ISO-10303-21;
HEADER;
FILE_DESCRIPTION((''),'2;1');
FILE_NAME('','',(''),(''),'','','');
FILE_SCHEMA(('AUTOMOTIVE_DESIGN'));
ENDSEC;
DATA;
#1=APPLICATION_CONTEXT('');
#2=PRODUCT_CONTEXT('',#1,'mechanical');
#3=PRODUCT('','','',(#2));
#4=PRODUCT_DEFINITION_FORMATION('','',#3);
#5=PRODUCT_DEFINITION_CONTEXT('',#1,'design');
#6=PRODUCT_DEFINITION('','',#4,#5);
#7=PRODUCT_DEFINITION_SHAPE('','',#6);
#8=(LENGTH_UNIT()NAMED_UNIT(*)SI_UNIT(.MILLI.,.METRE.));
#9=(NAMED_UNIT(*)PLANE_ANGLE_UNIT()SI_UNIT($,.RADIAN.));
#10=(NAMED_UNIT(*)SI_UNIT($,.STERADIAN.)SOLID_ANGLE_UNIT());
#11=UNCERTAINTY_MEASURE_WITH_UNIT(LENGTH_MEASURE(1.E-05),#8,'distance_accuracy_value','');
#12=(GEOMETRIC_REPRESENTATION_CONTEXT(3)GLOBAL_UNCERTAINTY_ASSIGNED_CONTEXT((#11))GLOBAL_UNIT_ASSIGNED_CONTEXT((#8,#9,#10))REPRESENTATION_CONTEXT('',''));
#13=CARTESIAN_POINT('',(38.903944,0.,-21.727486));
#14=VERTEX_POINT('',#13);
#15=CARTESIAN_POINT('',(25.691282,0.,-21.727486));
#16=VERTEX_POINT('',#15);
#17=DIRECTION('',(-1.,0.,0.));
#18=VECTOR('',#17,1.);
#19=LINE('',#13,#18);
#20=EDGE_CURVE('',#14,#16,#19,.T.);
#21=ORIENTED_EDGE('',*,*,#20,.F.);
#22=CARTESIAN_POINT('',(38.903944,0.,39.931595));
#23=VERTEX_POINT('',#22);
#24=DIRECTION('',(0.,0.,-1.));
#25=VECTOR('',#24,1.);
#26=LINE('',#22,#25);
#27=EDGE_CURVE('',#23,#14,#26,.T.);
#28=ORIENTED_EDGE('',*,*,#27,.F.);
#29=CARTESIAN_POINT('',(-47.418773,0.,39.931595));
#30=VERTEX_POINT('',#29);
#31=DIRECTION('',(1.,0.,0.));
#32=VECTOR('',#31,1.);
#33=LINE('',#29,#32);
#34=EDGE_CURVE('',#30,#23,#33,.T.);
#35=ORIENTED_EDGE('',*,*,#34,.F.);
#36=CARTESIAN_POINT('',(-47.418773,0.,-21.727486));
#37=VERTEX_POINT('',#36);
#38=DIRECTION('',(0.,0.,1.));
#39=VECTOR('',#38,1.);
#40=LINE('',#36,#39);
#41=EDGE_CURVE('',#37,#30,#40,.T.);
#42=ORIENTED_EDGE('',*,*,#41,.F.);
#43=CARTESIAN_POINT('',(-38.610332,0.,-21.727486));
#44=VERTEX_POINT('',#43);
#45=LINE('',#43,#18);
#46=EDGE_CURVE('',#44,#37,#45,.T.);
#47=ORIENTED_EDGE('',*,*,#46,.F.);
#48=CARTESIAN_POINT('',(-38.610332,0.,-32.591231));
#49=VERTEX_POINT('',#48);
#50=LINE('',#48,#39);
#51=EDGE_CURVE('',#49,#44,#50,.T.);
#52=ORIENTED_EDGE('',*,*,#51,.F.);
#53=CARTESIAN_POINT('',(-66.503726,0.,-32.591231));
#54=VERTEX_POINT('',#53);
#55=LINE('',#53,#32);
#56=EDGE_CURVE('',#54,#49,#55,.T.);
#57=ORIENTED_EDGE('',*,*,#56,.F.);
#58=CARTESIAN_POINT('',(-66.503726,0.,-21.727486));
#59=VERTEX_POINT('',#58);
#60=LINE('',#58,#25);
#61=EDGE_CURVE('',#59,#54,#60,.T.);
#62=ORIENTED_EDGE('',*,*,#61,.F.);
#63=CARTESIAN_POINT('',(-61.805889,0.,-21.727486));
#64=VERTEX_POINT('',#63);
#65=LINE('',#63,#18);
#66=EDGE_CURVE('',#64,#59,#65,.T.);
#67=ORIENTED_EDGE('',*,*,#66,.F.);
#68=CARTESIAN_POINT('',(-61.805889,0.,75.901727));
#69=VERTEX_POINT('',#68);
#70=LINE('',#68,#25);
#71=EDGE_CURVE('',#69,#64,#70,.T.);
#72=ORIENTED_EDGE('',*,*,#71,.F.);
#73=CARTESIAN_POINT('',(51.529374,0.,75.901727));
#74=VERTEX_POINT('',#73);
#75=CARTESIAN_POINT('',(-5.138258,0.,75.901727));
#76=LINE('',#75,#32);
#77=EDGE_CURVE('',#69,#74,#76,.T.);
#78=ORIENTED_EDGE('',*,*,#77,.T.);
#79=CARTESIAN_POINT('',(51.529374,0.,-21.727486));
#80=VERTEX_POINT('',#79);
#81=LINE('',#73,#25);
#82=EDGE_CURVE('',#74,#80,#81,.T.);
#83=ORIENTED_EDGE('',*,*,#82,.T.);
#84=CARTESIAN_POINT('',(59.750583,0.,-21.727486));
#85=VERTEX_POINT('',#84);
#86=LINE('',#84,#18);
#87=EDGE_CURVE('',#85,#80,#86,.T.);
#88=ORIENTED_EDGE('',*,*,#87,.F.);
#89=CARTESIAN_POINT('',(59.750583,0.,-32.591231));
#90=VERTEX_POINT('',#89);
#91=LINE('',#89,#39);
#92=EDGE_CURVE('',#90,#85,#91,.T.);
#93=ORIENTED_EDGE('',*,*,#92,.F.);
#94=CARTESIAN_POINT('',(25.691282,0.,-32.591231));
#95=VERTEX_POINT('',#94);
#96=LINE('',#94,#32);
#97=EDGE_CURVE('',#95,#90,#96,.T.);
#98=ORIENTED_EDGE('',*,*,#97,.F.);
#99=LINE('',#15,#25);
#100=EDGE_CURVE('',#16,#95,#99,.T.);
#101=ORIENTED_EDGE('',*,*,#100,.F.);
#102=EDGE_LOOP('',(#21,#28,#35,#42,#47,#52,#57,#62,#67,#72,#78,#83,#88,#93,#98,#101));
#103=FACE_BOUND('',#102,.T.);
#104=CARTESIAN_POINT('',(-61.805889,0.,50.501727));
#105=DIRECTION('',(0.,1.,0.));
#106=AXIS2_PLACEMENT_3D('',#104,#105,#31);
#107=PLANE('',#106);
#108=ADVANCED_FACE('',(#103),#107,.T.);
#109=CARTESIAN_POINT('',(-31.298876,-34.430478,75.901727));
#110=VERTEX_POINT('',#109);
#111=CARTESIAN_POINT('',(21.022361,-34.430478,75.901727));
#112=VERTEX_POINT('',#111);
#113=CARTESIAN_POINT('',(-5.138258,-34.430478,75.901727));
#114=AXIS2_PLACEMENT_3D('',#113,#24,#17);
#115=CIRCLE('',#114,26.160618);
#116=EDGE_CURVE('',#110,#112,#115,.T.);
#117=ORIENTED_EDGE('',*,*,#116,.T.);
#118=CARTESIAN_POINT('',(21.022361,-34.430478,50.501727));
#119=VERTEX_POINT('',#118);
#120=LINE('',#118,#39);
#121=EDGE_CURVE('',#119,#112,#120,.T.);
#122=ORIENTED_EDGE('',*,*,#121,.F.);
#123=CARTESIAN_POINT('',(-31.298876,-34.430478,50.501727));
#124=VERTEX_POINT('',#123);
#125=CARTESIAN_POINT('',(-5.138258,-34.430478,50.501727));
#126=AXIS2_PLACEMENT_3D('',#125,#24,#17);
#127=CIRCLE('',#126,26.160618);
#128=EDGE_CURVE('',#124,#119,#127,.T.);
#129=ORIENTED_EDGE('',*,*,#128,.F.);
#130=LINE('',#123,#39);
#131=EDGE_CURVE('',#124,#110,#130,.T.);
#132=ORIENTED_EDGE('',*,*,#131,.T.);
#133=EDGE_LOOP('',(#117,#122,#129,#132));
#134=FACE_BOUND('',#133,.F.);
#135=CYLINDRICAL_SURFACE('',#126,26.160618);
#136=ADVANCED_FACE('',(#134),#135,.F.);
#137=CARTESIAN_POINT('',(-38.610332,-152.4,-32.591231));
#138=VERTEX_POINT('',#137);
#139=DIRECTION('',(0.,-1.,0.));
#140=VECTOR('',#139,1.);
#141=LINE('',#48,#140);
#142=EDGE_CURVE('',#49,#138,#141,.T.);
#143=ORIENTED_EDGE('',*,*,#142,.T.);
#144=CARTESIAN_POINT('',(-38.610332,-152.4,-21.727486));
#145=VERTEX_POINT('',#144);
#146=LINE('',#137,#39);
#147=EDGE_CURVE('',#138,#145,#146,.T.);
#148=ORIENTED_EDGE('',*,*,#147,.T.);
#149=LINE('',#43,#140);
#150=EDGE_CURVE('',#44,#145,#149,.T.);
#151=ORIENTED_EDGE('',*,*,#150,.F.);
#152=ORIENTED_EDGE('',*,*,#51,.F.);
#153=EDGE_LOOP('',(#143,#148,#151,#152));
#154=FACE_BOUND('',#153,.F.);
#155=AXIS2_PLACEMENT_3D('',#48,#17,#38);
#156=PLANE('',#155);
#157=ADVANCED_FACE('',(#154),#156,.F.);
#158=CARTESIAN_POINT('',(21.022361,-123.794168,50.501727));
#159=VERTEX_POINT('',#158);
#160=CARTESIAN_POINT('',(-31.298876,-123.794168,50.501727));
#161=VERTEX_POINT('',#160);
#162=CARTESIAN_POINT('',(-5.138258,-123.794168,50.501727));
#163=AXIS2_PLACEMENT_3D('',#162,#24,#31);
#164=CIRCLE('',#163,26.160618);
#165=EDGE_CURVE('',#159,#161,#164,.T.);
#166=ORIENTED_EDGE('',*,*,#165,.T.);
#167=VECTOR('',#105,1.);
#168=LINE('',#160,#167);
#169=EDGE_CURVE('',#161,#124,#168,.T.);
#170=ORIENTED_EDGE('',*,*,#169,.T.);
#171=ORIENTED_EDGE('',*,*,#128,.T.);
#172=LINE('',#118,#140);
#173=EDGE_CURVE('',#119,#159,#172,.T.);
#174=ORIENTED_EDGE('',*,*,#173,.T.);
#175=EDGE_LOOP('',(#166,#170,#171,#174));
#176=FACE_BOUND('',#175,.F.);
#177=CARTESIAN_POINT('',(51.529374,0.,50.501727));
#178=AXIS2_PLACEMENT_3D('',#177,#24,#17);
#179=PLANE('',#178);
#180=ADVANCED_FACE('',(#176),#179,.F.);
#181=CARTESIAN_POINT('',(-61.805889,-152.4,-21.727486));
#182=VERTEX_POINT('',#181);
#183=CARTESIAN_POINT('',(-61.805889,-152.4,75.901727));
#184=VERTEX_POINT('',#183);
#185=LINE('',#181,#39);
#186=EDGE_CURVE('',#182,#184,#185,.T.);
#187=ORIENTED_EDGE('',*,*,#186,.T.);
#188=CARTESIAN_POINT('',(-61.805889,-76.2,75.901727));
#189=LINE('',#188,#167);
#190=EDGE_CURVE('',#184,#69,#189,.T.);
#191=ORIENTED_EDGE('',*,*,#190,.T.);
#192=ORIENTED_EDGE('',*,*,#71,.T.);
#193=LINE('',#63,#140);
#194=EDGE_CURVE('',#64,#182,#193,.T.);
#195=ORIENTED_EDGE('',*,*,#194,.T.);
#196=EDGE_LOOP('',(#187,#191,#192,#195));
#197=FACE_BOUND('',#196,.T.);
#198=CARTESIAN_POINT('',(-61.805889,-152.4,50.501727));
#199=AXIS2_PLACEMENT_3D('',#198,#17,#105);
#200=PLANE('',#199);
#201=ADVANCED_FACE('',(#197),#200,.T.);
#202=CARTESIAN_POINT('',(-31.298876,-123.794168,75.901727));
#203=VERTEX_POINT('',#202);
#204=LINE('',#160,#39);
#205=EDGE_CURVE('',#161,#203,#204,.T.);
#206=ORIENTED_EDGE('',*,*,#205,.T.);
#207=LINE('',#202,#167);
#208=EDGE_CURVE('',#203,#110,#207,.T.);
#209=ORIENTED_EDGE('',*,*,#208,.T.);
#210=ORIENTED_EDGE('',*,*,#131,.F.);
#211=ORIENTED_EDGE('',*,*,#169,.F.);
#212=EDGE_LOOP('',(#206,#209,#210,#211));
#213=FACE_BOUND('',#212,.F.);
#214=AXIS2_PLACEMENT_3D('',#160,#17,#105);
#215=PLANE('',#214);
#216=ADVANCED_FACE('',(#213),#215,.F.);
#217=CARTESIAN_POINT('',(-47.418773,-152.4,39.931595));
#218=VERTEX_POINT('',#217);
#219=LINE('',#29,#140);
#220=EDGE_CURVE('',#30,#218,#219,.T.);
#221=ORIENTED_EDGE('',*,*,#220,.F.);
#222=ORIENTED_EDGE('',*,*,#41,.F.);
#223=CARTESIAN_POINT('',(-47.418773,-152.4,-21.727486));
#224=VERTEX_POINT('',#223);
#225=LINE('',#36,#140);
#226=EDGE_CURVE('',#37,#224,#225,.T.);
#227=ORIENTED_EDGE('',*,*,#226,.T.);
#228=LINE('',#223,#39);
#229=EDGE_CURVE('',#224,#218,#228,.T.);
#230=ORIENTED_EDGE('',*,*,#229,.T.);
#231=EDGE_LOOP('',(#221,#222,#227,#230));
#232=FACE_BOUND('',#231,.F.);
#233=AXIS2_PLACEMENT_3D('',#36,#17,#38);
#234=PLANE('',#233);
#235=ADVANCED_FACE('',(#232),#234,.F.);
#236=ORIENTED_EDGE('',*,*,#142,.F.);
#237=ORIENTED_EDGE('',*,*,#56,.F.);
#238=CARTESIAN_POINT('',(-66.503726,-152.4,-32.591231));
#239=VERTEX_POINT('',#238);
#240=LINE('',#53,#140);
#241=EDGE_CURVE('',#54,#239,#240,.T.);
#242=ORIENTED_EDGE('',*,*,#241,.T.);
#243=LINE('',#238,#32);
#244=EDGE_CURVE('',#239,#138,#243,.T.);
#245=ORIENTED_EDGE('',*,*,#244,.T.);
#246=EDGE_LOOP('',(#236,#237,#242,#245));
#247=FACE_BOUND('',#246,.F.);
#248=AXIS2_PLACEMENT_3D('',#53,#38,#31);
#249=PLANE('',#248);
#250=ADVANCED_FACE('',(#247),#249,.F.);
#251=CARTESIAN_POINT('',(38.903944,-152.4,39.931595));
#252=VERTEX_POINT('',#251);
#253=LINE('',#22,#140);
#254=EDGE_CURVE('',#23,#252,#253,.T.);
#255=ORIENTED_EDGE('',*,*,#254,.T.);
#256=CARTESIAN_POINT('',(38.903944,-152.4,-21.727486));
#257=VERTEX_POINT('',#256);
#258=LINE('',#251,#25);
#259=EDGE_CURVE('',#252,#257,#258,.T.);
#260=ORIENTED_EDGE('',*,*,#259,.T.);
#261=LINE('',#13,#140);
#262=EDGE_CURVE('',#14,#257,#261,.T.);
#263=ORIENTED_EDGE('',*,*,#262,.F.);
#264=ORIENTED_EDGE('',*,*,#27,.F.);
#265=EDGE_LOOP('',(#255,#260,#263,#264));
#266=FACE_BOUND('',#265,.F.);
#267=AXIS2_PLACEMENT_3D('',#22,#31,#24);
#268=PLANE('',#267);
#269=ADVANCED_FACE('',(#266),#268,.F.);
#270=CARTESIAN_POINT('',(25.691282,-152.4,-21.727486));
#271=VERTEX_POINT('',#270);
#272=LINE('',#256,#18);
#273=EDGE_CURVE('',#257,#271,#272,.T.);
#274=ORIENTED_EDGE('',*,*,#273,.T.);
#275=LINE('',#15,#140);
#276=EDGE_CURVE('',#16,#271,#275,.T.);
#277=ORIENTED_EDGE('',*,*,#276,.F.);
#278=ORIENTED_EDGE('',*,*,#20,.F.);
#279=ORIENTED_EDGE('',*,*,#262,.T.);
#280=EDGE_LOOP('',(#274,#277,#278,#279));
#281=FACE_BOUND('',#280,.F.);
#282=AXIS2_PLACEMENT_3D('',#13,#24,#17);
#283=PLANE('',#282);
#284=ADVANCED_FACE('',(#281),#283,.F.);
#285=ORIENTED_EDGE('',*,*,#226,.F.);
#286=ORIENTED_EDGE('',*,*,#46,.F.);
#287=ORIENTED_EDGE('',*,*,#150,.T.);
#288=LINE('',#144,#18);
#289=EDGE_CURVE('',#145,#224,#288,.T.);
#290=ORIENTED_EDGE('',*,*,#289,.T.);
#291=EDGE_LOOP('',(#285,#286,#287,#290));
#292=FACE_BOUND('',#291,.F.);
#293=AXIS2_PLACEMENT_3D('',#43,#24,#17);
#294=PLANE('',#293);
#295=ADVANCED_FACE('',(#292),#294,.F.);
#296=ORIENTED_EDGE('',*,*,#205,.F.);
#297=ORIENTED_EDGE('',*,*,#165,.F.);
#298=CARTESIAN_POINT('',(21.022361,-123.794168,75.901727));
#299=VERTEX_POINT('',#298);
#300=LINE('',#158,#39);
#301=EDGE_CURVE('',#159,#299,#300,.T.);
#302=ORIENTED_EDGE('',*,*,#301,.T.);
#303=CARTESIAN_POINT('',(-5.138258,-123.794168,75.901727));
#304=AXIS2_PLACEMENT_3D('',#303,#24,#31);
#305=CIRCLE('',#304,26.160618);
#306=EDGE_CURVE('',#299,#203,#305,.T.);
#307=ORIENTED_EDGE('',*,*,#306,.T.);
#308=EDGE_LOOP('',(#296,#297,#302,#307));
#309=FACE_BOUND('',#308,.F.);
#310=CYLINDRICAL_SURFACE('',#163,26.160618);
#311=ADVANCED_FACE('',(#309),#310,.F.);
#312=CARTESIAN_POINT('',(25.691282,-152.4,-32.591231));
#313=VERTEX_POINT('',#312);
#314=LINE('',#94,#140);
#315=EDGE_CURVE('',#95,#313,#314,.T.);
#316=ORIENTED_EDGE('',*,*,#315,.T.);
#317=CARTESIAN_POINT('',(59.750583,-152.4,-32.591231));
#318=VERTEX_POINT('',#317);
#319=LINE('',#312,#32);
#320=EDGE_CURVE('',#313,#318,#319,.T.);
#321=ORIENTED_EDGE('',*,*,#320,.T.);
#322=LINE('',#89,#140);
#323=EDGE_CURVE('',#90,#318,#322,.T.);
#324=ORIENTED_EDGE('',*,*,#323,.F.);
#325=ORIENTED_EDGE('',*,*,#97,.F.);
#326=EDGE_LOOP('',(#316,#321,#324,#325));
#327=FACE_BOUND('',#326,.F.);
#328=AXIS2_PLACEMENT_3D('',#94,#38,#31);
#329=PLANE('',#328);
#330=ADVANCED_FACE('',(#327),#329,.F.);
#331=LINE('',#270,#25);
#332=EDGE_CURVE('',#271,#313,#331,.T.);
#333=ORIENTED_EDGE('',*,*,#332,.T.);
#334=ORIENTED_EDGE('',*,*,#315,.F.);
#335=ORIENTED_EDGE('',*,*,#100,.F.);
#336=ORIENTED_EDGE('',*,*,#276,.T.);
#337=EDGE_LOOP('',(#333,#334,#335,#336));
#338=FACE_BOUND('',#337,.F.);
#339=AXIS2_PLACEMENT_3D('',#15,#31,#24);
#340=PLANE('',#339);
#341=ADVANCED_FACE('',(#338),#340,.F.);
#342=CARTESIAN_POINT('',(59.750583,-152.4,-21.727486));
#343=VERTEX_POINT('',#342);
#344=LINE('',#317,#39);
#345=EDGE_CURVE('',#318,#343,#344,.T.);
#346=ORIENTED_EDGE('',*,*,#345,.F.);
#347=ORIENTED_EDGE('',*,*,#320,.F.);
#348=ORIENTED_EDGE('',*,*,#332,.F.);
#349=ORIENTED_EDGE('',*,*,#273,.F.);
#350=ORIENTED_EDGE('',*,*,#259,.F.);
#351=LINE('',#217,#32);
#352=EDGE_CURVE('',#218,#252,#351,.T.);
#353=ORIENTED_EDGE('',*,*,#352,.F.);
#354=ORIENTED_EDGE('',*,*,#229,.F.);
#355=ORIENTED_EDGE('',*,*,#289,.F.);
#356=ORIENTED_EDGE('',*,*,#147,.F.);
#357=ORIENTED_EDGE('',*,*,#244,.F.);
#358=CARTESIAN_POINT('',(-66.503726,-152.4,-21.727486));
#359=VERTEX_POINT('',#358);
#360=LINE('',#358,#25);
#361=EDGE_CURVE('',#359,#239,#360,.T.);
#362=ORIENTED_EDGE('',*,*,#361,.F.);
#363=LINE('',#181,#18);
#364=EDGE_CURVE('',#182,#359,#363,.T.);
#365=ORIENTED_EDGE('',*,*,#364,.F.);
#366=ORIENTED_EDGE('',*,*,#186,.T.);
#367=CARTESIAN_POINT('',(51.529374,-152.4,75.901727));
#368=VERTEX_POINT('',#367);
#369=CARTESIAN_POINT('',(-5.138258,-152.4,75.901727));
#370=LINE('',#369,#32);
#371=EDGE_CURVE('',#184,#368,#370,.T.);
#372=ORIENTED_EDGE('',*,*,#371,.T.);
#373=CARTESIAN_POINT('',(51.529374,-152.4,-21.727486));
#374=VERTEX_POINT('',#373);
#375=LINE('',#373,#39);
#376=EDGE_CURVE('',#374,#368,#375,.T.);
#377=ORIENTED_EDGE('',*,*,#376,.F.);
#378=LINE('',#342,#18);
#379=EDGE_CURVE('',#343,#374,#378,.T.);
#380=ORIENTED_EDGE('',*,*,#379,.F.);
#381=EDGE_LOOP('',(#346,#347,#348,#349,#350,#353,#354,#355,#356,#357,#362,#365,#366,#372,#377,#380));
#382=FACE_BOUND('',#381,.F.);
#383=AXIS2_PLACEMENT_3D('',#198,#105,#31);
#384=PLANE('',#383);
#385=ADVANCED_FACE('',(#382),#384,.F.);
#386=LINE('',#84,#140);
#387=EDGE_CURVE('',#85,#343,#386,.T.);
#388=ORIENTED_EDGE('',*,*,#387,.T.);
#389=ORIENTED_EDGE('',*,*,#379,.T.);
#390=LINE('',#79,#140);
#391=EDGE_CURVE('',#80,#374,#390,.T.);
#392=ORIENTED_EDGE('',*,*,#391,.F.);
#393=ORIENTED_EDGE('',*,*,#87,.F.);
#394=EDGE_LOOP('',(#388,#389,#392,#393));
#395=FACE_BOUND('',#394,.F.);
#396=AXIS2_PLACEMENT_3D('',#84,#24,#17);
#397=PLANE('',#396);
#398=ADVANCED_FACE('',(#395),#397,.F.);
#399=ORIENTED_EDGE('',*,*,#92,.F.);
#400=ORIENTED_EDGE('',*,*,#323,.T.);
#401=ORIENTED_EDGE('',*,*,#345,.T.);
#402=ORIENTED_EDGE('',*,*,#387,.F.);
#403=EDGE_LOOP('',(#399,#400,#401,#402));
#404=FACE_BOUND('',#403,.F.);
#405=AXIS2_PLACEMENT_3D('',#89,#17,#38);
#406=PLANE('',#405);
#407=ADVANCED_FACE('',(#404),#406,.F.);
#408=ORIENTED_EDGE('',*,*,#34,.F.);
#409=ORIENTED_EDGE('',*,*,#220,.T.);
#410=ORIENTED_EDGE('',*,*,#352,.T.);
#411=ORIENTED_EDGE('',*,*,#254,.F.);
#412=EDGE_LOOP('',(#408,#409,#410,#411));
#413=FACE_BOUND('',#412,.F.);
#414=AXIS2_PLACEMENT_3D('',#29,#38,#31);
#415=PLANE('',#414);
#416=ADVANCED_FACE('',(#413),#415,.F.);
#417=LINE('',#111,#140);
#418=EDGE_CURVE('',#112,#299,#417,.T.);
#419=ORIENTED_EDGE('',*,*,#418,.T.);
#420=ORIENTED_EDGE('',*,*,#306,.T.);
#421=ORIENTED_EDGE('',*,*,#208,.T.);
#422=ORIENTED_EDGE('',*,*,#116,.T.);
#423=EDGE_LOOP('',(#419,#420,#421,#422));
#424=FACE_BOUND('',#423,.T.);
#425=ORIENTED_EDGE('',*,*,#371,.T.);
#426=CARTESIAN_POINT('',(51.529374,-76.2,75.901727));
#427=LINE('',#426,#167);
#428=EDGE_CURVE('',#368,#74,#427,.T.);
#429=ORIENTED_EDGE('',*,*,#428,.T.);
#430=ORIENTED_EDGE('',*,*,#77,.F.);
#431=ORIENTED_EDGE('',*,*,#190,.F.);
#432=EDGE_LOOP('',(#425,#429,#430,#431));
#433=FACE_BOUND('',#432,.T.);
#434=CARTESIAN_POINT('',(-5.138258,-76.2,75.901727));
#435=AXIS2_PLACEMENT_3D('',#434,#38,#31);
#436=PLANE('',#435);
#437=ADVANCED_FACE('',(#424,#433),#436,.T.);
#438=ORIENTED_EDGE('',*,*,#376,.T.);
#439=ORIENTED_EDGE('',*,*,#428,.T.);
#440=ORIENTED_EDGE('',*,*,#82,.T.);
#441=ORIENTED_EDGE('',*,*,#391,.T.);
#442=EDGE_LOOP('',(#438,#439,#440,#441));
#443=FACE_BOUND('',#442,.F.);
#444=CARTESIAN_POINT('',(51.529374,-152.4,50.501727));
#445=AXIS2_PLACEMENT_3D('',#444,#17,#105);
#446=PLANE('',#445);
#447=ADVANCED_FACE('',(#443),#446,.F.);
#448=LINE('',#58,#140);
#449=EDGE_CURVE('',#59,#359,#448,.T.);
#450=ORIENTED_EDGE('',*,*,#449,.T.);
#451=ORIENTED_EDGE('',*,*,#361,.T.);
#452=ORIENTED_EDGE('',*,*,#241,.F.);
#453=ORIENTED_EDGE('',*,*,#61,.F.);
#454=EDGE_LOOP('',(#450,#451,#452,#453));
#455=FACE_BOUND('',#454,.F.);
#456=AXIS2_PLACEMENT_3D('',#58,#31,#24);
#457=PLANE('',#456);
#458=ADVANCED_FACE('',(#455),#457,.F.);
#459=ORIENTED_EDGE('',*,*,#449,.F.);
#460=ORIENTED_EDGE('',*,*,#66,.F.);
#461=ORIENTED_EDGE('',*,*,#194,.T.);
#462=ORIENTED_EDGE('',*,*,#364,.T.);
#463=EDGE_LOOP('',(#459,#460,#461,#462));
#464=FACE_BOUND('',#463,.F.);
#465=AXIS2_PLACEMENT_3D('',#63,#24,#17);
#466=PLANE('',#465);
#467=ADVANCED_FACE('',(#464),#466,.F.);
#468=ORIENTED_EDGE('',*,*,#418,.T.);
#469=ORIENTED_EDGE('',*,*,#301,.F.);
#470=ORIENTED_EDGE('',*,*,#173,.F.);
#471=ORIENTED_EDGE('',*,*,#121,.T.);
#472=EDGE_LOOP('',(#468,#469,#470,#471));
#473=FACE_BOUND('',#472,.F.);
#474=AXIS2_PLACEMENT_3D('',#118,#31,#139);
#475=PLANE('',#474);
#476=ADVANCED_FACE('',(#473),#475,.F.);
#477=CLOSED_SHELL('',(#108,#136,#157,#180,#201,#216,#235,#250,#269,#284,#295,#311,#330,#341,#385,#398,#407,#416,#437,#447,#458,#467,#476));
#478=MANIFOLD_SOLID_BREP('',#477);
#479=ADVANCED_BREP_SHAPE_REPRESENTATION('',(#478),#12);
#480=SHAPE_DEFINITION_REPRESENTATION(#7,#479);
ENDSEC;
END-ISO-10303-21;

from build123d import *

# Parameters (mm, degrees)
F1_DEPTH = 152.4
F2_W     = 113.335262984
F2_H     = 152.4
F3_DEPTH = 25.4


# Not quite as in the source:
# - a feature names something its author has since deleted; it is built from what else it names


with BuildPart() as f1:
    # F0 (on Front) → F1 (new body)
    with BuildSketch(Plane.XZ):
        Polygon((-61.8058890104, -21.7274855822), (-66.5037259459, -21.7274855822), (-66.5037259459, -32.5912311673), (-38.6103317142, -32.5912311673), (-38.6103317142, -21.7274855822), (-47.4187731743, -21.7274855822), (-47.4187731743, 39.9315953255), (38.9039441943, 39.9315953255), (38.9039441943, -21.7274855822), (25.6912820041, -21.7274855822), (25.6912820041, -32.5912311673), (59.7505830228, -32.5912311673), (59.7505830228, -21.7274855822), (51.5293739736, -21.7274855822), (51.5293739736, 50.5017265677), (-61.8058890104, 50.5017265677), align=None)
    extrude(amount=F1_DEPTH)

    # F2 (on face) → F3 (join)
    with BuildSketch(Plane.XY.offset(50.5017265677)):
        with Locations((-5.1382575184, -76.2)):
            Rectangle(F2_W, F2_H)
        with BuildLine():
            Line((-31.2988758087, -123.7941682339), (-31.2988758087, -34.4304777682))
            ThreePointArc((-31.2988758087, -34.4304777682), (-5.1382575184, -8.2698594779), (21.0223607719, -34.4304777682))
            Line((21.0223607719, -34.4304777682), (21.0223607719, -123.7941682339))
            ThreePointArc((21.0223607719, -123.7941682339), (-5.1382575184, -149.9547865242), (-31.2988758087, -123.7941682339))
        make_face(mode=Mode.SUBTRACT)
    extrude(amount=F3_DEPTH)


solid = f1.part
